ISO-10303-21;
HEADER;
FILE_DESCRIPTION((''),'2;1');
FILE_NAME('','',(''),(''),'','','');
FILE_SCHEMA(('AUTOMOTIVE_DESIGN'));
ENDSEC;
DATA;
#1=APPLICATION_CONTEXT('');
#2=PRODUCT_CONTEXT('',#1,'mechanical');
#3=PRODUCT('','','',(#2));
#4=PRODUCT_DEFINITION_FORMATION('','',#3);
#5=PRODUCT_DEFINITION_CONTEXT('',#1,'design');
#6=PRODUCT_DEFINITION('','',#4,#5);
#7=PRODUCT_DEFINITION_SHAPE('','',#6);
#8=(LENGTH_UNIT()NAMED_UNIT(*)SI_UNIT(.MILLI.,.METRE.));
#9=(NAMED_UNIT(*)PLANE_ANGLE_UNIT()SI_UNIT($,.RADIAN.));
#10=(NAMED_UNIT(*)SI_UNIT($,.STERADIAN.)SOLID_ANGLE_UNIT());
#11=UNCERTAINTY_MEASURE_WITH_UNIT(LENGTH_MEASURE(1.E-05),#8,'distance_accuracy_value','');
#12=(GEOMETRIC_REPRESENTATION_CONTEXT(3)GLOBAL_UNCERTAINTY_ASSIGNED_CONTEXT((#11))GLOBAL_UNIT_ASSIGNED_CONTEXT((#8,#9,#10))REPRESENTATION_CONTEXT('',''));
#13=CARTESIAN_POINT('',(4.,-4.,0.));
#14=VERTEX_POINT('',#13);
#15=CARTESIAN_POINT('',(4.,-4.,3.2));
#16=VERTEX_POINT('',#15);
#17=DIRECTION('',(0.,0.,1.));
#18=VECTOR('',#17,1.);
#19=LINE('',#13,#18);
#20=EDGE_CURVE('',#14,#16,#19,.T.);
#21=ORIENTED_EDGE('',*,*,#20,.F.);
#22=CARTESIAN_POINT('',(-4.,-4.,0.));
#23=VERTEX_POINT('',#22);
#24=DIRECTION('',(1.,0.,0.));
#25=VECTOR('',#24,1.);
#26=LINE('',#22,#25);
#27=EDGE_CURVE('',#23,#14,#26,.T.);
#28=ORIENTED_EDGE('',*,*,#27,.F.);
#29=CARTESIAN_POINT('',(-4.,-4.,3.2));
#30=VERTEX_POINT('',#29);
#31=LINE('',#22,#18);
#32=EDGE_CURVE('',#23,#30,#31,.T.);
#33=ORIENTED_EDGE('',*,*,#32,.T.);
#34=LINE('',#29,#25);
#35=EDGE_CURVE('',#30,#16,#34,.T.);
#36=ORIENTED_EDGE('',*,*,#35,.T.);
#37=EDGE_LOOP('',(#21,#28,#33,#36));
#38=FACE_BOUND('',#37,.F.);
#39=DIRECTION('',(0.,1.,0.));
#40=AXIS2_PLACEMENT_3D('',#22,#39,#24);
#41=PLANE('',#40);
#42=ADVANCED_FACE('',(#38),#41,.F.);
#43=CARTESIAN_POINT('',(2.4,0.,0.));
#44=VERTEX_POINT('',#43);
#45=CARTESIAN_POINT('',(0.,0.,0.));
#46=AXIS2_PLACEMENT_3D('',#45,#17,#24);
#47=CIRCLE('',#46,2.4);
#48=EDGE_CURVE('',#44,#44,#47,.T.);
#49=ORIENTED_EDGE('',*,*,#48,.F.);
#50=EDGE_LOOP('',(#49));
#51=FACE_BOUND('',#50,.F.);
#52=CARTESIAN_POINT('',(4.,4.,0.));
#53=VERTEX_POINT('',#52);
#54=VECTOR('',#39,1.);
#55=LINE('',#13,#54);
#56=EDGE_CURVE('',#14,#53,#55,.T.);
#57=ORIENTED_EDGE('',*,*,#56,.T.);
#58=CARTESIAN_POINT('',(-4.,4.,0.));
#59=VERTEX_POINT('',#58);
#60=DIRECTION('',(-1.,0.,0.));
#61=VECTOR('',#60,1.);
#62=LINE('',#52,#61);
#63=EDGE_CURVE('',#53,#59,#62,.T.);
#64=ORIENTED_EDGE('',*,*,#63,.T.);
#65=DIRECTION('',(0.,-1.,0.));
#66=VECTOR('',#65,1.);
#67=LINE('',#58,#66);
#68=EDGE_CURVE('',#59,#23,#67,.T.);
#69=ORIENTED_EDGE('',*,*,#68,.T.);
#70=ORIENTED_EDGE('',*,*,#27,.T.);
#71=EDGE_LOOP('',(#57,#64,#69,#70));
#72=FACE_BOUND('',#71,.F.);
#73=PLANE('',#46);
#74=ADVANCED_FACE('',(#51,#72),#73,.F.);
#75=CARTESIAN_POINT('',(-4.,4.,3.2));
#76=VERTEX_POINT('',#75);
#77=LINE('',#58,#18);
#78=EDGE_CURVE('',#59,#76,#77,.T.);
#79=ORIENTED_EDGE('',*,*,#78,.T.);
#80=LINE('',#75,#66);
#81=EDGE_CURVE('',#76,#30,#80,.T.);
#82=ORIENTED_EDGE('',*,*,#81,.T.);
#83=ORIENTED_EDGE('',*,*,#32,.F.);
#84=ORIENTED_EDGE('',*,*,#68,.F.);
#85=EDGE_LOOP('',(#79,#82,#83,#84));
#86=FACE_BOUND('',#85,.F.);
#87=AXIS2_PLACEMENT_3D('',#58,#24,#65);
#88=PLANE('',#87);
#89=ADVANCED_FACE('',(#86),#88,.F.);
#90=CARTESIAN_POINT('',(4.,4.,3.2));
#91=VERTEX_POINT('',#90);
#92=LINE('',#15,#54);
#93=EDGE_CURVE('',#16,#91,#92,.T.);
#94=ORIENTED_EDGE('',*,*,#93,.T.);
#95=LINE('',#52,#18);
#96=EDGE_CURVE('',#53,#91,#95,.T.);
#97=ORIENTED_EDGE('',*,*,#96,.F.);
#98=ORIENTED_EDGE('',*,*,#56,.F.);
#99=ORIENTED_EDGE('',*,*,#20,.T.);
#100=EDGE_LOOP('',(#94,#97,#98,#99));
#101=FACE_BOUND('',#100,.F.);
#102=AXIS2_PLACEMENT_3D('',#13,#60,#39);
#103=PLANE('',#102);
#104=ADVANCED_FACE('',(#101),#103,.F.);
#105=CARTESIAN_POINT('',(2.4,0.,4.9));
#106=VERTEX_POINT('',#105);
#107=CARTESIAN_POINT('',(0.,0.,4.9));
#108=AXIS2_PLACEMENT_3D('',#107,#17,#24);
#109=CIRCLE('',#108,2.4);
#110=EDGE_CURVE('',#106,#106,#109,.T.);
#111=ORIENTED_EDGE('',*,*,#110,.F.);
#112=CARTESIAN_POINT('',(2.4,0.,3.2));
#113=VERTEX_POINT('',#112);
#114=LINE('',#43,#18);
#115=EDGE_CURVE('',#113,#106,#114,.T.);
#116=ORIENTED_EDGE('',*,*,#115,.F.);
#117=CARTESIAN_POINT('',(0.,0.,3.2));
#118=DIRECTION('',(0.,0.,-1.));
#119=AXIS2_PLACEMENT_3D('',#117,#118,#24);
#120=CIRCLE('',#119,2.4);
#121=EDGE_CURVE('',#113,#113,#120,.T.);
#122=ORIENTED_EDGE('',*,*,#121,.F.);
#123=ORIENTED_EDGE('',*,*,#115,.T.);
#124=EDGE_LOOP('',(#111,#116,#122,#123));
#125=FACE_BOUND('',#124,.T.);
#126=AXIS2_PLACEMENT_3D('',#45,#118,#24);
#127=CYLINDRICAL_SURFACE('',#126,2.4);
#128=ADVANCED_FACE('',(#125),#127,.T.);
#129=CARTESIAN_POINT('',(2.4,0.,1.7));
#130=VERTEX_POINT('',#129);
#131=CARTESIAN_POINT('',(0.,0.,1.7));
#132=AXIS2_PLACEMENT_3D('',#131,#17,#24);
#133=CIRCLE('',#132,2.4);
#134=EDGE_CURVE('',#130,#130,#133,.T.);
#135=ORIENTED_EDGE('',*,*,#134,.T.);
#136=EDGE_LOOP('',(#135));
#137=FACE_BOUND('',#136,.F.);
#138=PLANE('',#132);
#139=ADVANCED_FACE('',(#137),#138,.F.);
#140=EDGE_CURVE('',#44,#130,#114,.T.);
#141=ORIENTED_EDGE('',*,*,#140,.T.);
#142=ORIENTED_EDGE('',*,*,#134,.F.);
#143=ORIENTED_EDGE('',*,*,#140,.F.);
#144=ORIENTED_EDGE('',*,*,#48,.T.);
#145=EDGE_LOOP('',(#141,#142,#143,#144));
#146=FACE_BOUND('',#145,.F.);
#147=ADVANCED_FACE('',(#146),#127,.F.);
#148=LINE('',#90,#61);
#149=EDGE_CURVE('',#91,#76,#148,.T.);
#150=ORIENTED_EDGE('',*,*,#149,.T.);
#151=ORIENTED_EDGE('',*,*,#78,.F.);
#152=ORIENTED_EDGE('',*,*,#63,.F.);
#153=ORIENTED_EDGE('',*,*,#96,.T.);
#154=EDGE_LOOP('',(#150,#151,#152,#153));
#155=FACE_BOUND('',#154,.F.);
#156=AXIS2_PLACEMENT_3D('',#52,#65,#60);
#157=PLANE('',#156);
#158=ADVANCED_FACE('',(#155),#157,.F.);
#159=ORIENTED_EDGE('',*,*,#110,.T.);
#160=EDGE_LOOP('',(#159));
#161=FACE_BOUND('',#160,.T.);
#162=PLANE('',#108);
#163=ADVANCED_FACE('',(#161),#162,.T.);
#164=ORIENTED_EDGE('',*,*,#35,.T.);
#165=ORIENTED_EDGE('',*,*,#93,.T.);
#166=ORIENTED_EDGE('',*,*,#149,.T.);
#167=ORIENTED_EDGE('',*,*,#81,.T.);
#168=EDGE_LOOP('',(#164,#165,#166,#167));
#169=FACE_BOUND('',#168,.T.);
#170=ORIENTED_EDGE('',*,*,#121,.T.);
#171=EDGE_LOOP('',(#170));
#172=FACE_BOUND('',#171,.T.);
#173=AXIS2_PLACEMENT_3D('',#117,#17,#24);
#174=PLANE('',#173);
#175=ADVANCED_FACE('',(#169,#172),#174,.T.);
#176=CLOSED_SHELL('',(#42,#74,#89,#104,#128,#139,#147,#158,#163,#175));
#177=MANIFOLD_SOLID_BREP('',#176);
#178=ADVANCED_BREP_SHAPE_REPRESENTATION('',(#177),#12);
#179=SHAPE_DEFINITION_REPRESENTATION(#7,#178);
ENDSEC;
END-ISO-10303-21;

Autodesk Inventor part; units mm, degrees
ref_plane "YZ Plane" through (0, 0, 0) normal (1, 0, 0) x (0, 1, 0)
ref_plane "XZ Plane" through (0, 0, 0) normal (0, 1, 0) x (-1, 0, 0)
ref_plane "XY Plane" through (0, 0, 0) normal (0, 0, 1) x (1, 0, 0)
sketch "Sketch1" plane through (0, 0, 0) normal (0, 0, 1) x (1, 0, 0)
  line L0 (-4, -4) -> (4, -4)
  line L1 (4, -4) -> (4, 4)
  line L2 (4, 4) -> (-4, 4)
  line L3 (-4, 4) -> (-4, -4)
  line L4 (-4, -4) -> (4, 4) construction
  line L5 (4, -4) -> (-4, 4) construction
  circle A0 centre (0, 0) radius 2.4
  dimension "d0" = 8
  dimension "d1" = 8
  dimension "d2" = 4.8
extrude "Extrusion1" add sketch "Sketch1" along normal blind 3.2 contours L3 L2 L1 L0 | A0
extrude "Extrusion2" add sketch "Sketch1" along normal blind 4.9 contours A0
extrude "Extrusion3" cut sketch "Sketch1" along normal blind 1.7 contours A0
pattern_of_one "Rectangular Pattern1"
equation "\"d11\" = d0"
equation "\"d24\" = d0"
properties part number "LEGO Stud 1x1 Transparent Red"
